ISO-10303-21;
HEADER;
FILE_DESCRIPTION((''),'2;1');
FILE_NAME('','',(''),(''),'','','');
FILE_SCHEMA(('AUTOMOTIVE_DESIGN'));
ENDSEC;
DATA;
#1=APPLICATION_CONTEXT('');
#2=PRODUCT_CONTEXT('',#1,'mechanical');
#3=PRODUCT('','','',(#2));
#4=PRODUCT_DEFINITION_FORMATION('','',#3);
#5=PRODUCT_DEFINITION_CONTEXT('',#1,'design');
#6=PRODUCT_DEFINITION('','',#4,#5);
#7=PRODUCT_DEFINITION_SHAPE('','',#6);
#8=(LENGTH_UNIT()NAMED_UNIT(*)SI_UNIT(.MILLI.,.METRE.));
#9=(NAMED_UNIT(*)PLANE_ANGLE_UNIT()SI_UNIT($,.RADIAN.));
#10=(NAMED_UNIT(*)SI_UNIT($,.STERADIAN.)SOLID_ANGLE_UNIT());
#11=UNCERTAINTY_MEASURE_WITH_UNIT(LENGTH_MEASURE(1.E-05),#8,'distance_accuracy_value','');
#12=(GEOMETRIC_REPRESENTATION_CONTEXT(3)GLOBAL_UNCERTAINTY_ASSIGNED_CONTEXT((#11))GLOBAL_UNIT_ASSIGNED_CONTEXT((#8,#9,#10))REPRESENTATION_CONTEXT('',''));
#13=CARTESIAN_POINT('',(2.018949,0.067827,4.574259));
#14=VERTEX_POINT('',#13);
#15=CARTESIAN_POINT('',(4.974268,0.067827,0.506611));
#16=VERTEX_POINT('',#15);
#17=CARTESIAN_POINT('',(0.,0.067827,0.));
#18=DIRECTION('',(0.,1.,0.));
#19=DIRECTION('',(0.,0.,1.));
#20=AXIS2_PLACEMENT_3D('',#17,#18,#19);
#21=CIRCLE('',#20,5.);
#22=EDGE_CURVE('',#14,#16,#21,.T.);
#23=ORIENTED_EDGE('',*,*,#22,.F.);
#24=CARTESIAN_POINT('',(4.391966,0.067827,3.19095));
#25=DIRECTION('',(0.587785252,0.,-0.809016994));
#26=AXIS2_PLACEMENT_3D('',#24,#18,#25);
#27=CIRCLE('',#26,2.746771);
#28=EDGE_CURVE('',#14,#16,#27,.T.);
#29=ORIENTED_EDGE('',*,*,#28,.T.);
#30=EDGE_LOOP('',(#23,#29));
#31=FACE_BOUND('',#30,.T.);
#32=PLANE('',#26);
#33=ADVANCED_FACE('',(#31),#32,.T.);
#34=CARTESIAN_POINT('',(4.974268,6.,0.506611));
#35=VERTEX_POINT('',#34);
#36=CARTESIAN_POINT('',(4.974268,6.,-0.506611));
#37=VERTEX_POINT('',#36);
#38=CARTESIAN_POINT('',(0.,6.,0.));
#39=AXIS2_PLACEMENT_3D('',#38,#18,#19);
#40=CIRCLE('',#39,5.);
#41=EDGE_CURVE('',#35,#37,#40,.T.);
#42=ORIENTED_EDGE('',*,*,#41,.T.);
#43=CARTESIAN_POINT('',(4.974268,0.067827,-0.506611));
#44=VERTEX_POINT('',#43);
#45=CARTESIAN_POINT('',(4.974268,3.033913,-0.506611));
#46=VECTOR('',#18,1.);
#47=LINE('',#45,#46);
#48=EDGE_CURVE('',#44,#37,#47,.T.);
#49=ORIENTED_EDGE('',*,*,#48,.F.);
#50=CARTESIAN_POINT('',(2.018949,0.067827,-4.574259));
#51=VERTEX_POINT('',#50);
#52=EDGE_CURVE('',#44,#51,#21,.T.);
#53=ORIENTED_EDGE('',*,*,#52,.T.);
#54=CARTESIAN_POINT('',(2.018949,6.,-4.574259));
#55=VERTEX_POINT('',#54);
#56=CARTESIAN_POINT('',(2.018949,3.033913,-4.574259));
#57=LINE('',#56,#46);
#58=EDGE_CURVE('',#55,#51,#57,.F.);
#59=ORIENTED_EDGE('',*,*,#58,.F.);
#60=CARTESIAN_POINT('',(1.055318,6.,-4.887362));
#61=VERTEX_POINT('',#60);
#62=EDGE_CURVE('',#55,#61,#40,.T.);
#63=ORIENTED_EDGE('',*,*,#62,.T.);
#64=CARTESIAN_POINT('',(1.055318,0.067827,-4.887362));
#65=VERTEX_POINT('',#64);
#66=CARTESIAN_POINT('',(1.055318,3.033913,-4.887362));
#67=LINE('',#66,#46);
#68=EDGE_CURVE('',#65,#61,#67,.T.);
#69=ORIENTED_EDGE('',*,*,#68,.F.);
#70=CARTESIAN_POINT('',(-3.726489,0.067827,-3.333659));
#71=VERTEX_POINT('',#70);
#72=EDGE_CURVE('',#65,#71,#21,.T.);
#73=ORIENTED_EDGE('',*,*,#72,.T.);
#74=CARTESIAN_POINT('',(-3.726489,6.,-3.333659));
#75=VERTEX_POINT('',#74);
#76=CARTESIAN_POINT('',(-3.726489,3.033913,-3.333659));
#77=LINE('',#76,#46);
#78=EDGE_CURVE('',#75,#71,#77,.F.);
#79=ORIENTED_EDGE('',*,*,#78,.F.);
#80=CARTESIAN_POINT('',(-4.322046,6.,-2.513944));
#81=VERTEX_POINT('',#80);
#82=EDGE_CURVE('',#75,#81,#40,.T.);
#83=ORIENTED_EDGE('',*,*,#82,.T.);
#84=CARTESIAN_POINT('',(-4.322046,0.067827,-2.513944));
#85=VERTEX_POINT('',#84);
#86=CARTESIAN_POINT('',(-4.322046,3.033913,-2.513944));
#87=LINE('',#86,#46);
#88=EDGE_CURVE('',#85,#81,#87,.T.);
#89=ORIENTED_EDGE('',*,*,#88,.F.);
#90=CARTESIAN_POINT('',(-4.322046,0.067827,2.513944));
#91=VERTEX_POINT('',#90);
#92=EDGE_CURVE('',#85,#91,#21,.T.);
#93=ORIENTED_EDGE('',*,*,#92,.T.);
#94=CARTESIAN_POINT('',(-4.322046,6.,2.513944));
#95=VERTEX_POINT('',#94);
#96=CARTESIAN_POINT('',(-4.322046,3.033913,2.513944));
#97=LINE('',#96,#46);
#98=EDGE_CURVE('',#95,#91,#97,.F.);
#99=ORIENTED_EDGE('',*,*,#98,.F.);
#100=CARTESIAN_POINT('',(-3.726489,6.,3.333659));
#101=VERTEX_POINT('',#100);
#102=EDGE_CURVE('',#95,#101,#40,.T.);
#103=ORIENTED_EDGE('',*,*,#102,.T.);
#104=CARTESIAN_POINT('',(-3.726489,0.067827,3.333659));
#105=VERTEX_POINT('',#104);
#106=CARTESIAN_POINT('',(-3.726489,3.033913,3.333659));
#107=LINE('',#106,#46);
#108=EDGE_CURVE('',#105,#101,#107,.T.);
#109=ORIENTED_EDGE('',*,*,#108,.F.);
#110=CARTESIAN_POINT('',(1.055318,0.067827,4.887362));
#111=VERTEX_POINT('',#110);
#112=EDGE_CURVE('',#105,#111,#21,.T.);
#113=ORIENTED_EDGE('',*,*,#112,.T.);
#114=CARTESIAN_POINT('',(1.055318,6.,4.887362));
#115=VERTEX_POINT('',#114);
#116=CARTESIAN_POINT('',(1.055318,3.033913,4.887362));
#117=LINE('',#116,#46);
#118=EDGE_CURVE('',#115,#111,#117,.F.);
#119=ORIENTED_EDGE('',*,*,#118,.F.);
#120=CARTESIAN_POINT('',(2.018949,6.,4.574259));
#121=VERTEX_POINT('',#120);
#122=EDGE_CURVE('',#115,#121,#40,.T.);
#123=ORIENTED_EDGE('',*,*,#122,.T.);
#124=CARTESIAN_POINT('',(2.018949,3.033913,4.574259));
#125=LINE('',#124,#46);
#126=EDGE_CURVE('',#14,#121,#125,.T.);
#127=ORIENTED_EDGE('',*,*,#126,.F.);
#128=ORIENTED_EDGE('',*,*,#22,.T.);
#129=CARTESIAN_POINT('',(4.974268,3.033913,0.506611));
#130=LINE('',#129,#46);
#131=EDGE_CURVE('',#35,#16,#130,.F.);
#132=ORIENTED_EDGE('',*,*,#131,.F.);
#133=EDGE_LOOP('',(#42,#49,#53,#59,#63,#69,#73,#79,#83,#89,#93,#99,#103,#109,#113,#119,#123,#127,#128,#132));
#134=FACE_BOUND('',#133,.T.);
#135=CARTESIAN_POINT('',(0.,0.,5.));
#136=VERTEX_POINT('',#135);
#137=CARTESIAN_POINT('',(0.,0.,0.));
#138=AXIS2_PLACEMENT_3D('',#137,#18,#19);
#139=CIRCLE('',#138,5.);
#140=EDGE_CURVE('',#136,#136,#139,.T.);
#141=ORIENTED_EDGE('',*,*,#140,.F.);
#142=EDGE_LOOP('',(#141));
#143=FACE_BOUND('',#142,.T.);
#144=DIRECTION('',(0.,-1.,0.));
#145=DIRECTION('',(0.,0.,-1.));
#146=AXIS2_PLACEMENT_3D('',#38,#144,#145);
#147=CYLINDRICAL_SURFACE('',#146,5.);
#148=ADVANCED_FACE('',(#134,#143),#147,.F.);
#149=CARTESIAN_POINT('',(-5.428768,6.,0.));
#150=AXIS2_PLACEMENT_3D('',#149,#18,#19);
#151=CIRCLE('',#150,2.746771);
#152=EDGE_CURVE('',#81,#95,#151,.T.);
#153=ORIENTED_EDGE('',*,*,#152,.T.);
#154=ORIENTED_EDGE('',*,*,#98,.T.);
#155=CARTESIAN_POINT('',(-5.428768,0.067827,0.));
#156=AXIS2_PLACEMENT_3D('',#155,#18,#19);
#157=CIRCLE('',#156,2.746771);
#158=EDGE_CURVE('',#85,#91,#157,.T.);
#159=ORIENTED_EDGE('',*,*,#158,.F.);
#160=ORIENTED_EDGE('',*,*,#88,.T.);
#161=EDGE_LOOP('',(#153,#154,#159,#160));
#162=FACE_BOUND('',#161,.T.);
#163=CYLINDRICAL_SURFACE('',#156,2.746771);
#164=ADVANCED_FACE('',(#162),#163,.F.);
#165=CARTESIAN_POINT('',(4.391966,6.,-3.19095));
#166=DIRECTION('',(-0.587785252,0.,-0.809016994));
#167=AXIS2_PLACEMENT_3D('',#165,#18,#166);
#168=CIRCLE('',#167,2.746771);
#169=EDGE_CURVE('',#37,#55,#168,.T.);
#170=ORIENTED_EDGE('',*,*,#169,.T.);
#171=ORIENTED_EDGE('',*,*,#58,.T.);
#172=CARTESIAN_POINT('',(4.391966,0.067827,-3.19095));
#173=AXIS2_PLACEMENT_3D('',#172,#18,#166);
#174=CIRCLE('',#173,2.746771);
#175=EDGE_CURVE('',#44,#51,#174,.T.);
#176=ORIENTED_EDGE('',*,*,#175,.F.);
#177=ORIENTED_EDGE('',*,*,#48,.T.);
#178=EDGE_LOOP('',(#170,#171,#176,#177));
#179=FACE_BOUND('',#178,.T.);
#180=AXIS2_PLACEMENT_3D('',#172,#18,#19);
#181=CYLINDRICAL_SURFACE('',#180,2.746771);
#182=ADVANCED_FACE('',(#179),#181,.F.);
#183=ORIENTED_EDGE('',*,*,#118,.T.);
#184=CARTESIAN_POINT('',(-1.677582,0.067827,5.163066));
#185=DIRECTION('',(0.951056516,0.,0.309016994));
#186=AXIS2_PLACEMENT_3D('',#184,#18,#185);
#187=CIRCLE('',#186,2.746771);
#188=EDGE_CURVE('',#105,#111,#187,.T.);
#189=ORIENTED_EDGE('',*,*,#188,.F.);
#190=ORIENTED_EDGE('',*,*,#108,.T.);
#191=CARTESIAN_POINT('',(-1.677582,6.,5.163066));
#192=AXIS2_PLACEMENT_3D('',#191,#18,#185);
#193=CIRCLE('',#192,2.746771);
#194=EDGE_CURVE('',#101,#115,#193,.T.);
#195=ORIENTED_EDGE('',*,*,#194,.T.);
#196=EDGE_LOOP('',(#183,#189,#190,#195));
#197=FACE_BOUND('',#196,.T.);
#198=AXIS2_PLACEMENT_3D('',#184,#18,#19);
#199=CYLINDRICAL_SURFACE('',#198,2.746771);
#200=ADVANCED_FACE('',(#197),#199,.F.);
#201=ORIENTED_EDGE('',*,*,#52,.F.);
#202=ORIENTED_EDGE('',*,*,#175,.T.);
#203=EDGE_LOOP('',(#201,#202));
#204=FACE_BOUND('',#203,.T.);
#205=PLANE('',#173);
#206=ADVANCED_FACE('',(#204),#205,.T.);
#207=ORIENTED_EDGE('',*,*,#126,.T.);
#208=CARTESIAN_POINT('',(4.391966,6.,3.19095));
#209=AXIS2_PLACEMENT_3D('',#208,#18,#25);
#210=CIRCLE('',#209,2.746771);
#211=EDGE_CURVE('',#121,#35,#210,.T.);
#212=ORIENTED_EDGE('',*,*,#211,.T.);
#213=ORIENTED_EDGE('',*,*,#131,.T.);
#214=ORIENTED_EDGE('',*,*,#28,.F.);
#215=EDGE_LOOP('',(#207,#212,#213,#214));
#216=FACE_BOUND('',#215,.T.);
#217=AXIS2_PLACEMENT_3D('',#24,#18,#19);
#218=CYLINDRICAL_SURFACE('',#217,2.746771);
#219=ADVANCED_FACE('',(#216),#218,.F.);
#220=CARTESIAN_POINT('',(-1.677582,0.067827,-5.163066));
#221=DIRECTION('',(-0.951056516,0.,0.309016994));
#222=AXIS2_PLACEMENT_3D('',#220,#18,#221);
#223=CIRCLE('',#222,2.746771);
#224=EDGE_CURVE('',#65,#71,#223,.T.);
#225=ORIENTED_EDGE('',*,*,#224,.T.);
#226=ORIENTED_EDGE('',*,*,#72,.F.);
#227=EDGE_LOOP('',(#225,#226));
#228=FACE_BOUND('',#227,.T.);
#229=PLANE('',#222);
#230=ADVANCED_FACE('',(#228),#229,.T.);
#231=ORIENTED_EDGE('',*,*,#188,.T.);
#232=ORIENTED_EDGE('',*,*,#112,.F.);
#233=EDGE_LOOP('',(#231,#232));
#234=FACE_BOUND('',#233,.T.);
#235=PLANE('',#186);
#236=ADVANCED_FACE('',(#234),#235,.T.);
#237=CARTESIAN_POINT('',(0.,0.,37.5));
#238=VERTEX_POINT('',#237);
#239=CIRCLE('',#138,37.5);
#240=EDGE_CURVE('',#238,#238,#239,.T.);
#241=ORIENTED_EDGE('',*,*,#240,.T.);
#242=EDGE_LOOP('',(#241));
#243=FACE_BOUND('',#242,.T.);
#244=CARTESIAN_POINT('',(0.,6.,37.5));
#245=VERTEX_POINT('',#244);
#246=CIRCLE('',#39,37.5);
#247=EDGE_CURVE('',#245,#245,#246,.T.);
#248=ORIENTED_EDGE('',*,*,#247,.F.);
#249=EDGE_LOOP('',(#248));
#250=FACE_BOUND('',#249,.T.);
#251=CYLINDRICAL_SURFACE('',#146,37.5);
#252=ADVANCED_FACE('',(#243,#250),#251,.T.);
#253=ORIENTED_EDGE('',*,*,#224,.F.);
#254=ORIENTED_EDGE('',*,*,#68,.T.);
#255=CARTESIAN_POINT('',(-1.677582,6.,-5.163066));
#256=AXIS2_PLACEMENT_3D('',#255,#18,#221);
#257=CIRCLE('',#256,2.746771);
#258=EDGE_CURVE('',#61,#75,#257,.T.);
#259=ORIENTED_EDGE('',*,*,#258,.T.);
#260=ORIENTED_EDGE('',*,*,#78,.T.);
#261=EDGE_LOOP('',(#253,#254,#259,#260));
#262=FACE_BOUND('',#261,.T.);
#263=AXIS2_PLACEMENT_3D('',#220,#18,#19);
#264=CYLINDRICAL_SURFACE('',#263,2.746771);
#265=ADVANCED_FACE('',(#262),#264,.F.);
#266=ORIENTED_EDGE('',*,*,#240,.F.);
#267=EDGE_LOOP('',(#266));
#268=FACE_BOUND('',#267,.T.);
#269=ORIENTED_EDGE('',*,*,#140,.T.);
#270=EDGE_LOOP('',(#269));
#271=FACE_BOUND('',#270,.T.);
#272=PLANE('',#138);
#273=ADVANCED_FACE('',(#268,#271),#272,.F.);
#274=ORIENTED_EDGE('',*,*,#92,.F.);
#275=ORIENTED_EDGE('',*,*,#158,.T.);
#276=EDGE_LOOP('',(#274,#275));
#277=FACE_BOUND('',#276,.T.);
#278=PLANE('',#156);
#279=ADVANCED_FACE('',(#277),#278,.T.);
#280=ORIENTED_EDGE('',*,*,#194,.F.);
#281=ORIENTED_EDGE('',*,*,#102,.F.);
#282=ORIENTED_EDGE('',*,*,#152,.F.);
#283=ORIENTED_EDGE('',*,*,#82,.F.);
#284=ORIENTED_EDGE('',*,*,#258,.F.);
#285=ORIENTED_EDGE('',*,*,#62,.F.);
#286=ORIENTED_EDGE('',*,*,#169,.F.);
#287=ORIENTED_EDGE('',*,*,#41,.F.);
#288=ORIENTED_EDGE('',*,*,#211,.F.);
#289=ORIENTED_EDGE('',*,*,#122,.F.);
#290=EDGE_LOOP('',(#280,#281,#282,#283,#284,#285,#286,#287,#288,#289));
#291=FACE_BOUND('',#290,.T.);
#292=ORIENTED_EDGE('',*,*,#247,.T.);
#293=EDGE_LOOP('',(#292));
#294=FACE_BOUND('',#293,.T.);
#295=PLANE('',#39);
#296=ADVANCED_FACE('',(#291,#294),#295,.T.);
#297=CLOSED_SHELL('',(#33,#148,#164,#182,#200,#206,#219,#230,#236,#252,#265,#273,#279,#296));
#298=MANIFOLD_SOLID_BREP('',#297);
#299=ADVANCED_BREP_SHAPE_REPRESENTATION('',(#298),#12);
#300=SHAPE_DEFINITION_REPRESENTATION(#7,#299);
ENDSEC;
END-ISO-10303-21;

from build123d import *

# Parameters (mm, degrees)
SKETCH1_R           = 37.5
BOSS_EXTRUDE1_DEPTH = 6
SKETCH2_R           = 5
CUT_EXTRUDE1_DEPTH  = 54.371340624
SKETCH3_R           = 2.746770978
CUT_EXTRUDE2_DEPTH  = 5.932173135
CIRPATTERN1_COUNT   = 5


with BuildPart() as part:
    # Sketch1 → Boss-Extrude1 (new body)
    with BuildSketch(Plane(origin=(0, 0, 0), x_dir=(1, 0, 0), z_dir=(0, 1, 0))):
        Circle(SKETCH1_R)
    extrude(amount=BOSS_EXTRUDE1_DEPTH)

    # Sketch2 → Cut-Extrude1 (cut, through all)
    with BuildSketch(Plane(origin=(0, 0, 0), x_dir=(1, 0, 0), z_dir=(0, 1, 0))):
        Circle(SKETCH2_R)
    extrude(amount=CUT_EXTRUDE1_DEPTH, mode=Mode.SUBTRACT)

    # Sketch3 → Cut-Extrude2 (cut)
    with BuildSketch(Plane(origin=(0, 6, 0), x_dir=(1, 0, 0), z_dir=(0, 1, 0))):
        with Locations((-5.428768432, 0)):
            Circle(SKETCH3_R)
    cut_extrude2 = extrude(amount=-CUT_EXTRUDE2_DEPTH, mode=Mode.SUBTRACT)

    # CirPattern1: Cut-Extrude2 ×5 about axis
    cirpattern1_axis = Axis((0, 0, 0), (0, 1, 0))
    for i in range(1, CIRPATTERN1_COUNT):
        add(cut_extrude2.rotate(cirpattern1_axis, i * 360 / CIRPATTERN1_COUNT), mode=Mode.SUBTRACT)


solid = part.part
